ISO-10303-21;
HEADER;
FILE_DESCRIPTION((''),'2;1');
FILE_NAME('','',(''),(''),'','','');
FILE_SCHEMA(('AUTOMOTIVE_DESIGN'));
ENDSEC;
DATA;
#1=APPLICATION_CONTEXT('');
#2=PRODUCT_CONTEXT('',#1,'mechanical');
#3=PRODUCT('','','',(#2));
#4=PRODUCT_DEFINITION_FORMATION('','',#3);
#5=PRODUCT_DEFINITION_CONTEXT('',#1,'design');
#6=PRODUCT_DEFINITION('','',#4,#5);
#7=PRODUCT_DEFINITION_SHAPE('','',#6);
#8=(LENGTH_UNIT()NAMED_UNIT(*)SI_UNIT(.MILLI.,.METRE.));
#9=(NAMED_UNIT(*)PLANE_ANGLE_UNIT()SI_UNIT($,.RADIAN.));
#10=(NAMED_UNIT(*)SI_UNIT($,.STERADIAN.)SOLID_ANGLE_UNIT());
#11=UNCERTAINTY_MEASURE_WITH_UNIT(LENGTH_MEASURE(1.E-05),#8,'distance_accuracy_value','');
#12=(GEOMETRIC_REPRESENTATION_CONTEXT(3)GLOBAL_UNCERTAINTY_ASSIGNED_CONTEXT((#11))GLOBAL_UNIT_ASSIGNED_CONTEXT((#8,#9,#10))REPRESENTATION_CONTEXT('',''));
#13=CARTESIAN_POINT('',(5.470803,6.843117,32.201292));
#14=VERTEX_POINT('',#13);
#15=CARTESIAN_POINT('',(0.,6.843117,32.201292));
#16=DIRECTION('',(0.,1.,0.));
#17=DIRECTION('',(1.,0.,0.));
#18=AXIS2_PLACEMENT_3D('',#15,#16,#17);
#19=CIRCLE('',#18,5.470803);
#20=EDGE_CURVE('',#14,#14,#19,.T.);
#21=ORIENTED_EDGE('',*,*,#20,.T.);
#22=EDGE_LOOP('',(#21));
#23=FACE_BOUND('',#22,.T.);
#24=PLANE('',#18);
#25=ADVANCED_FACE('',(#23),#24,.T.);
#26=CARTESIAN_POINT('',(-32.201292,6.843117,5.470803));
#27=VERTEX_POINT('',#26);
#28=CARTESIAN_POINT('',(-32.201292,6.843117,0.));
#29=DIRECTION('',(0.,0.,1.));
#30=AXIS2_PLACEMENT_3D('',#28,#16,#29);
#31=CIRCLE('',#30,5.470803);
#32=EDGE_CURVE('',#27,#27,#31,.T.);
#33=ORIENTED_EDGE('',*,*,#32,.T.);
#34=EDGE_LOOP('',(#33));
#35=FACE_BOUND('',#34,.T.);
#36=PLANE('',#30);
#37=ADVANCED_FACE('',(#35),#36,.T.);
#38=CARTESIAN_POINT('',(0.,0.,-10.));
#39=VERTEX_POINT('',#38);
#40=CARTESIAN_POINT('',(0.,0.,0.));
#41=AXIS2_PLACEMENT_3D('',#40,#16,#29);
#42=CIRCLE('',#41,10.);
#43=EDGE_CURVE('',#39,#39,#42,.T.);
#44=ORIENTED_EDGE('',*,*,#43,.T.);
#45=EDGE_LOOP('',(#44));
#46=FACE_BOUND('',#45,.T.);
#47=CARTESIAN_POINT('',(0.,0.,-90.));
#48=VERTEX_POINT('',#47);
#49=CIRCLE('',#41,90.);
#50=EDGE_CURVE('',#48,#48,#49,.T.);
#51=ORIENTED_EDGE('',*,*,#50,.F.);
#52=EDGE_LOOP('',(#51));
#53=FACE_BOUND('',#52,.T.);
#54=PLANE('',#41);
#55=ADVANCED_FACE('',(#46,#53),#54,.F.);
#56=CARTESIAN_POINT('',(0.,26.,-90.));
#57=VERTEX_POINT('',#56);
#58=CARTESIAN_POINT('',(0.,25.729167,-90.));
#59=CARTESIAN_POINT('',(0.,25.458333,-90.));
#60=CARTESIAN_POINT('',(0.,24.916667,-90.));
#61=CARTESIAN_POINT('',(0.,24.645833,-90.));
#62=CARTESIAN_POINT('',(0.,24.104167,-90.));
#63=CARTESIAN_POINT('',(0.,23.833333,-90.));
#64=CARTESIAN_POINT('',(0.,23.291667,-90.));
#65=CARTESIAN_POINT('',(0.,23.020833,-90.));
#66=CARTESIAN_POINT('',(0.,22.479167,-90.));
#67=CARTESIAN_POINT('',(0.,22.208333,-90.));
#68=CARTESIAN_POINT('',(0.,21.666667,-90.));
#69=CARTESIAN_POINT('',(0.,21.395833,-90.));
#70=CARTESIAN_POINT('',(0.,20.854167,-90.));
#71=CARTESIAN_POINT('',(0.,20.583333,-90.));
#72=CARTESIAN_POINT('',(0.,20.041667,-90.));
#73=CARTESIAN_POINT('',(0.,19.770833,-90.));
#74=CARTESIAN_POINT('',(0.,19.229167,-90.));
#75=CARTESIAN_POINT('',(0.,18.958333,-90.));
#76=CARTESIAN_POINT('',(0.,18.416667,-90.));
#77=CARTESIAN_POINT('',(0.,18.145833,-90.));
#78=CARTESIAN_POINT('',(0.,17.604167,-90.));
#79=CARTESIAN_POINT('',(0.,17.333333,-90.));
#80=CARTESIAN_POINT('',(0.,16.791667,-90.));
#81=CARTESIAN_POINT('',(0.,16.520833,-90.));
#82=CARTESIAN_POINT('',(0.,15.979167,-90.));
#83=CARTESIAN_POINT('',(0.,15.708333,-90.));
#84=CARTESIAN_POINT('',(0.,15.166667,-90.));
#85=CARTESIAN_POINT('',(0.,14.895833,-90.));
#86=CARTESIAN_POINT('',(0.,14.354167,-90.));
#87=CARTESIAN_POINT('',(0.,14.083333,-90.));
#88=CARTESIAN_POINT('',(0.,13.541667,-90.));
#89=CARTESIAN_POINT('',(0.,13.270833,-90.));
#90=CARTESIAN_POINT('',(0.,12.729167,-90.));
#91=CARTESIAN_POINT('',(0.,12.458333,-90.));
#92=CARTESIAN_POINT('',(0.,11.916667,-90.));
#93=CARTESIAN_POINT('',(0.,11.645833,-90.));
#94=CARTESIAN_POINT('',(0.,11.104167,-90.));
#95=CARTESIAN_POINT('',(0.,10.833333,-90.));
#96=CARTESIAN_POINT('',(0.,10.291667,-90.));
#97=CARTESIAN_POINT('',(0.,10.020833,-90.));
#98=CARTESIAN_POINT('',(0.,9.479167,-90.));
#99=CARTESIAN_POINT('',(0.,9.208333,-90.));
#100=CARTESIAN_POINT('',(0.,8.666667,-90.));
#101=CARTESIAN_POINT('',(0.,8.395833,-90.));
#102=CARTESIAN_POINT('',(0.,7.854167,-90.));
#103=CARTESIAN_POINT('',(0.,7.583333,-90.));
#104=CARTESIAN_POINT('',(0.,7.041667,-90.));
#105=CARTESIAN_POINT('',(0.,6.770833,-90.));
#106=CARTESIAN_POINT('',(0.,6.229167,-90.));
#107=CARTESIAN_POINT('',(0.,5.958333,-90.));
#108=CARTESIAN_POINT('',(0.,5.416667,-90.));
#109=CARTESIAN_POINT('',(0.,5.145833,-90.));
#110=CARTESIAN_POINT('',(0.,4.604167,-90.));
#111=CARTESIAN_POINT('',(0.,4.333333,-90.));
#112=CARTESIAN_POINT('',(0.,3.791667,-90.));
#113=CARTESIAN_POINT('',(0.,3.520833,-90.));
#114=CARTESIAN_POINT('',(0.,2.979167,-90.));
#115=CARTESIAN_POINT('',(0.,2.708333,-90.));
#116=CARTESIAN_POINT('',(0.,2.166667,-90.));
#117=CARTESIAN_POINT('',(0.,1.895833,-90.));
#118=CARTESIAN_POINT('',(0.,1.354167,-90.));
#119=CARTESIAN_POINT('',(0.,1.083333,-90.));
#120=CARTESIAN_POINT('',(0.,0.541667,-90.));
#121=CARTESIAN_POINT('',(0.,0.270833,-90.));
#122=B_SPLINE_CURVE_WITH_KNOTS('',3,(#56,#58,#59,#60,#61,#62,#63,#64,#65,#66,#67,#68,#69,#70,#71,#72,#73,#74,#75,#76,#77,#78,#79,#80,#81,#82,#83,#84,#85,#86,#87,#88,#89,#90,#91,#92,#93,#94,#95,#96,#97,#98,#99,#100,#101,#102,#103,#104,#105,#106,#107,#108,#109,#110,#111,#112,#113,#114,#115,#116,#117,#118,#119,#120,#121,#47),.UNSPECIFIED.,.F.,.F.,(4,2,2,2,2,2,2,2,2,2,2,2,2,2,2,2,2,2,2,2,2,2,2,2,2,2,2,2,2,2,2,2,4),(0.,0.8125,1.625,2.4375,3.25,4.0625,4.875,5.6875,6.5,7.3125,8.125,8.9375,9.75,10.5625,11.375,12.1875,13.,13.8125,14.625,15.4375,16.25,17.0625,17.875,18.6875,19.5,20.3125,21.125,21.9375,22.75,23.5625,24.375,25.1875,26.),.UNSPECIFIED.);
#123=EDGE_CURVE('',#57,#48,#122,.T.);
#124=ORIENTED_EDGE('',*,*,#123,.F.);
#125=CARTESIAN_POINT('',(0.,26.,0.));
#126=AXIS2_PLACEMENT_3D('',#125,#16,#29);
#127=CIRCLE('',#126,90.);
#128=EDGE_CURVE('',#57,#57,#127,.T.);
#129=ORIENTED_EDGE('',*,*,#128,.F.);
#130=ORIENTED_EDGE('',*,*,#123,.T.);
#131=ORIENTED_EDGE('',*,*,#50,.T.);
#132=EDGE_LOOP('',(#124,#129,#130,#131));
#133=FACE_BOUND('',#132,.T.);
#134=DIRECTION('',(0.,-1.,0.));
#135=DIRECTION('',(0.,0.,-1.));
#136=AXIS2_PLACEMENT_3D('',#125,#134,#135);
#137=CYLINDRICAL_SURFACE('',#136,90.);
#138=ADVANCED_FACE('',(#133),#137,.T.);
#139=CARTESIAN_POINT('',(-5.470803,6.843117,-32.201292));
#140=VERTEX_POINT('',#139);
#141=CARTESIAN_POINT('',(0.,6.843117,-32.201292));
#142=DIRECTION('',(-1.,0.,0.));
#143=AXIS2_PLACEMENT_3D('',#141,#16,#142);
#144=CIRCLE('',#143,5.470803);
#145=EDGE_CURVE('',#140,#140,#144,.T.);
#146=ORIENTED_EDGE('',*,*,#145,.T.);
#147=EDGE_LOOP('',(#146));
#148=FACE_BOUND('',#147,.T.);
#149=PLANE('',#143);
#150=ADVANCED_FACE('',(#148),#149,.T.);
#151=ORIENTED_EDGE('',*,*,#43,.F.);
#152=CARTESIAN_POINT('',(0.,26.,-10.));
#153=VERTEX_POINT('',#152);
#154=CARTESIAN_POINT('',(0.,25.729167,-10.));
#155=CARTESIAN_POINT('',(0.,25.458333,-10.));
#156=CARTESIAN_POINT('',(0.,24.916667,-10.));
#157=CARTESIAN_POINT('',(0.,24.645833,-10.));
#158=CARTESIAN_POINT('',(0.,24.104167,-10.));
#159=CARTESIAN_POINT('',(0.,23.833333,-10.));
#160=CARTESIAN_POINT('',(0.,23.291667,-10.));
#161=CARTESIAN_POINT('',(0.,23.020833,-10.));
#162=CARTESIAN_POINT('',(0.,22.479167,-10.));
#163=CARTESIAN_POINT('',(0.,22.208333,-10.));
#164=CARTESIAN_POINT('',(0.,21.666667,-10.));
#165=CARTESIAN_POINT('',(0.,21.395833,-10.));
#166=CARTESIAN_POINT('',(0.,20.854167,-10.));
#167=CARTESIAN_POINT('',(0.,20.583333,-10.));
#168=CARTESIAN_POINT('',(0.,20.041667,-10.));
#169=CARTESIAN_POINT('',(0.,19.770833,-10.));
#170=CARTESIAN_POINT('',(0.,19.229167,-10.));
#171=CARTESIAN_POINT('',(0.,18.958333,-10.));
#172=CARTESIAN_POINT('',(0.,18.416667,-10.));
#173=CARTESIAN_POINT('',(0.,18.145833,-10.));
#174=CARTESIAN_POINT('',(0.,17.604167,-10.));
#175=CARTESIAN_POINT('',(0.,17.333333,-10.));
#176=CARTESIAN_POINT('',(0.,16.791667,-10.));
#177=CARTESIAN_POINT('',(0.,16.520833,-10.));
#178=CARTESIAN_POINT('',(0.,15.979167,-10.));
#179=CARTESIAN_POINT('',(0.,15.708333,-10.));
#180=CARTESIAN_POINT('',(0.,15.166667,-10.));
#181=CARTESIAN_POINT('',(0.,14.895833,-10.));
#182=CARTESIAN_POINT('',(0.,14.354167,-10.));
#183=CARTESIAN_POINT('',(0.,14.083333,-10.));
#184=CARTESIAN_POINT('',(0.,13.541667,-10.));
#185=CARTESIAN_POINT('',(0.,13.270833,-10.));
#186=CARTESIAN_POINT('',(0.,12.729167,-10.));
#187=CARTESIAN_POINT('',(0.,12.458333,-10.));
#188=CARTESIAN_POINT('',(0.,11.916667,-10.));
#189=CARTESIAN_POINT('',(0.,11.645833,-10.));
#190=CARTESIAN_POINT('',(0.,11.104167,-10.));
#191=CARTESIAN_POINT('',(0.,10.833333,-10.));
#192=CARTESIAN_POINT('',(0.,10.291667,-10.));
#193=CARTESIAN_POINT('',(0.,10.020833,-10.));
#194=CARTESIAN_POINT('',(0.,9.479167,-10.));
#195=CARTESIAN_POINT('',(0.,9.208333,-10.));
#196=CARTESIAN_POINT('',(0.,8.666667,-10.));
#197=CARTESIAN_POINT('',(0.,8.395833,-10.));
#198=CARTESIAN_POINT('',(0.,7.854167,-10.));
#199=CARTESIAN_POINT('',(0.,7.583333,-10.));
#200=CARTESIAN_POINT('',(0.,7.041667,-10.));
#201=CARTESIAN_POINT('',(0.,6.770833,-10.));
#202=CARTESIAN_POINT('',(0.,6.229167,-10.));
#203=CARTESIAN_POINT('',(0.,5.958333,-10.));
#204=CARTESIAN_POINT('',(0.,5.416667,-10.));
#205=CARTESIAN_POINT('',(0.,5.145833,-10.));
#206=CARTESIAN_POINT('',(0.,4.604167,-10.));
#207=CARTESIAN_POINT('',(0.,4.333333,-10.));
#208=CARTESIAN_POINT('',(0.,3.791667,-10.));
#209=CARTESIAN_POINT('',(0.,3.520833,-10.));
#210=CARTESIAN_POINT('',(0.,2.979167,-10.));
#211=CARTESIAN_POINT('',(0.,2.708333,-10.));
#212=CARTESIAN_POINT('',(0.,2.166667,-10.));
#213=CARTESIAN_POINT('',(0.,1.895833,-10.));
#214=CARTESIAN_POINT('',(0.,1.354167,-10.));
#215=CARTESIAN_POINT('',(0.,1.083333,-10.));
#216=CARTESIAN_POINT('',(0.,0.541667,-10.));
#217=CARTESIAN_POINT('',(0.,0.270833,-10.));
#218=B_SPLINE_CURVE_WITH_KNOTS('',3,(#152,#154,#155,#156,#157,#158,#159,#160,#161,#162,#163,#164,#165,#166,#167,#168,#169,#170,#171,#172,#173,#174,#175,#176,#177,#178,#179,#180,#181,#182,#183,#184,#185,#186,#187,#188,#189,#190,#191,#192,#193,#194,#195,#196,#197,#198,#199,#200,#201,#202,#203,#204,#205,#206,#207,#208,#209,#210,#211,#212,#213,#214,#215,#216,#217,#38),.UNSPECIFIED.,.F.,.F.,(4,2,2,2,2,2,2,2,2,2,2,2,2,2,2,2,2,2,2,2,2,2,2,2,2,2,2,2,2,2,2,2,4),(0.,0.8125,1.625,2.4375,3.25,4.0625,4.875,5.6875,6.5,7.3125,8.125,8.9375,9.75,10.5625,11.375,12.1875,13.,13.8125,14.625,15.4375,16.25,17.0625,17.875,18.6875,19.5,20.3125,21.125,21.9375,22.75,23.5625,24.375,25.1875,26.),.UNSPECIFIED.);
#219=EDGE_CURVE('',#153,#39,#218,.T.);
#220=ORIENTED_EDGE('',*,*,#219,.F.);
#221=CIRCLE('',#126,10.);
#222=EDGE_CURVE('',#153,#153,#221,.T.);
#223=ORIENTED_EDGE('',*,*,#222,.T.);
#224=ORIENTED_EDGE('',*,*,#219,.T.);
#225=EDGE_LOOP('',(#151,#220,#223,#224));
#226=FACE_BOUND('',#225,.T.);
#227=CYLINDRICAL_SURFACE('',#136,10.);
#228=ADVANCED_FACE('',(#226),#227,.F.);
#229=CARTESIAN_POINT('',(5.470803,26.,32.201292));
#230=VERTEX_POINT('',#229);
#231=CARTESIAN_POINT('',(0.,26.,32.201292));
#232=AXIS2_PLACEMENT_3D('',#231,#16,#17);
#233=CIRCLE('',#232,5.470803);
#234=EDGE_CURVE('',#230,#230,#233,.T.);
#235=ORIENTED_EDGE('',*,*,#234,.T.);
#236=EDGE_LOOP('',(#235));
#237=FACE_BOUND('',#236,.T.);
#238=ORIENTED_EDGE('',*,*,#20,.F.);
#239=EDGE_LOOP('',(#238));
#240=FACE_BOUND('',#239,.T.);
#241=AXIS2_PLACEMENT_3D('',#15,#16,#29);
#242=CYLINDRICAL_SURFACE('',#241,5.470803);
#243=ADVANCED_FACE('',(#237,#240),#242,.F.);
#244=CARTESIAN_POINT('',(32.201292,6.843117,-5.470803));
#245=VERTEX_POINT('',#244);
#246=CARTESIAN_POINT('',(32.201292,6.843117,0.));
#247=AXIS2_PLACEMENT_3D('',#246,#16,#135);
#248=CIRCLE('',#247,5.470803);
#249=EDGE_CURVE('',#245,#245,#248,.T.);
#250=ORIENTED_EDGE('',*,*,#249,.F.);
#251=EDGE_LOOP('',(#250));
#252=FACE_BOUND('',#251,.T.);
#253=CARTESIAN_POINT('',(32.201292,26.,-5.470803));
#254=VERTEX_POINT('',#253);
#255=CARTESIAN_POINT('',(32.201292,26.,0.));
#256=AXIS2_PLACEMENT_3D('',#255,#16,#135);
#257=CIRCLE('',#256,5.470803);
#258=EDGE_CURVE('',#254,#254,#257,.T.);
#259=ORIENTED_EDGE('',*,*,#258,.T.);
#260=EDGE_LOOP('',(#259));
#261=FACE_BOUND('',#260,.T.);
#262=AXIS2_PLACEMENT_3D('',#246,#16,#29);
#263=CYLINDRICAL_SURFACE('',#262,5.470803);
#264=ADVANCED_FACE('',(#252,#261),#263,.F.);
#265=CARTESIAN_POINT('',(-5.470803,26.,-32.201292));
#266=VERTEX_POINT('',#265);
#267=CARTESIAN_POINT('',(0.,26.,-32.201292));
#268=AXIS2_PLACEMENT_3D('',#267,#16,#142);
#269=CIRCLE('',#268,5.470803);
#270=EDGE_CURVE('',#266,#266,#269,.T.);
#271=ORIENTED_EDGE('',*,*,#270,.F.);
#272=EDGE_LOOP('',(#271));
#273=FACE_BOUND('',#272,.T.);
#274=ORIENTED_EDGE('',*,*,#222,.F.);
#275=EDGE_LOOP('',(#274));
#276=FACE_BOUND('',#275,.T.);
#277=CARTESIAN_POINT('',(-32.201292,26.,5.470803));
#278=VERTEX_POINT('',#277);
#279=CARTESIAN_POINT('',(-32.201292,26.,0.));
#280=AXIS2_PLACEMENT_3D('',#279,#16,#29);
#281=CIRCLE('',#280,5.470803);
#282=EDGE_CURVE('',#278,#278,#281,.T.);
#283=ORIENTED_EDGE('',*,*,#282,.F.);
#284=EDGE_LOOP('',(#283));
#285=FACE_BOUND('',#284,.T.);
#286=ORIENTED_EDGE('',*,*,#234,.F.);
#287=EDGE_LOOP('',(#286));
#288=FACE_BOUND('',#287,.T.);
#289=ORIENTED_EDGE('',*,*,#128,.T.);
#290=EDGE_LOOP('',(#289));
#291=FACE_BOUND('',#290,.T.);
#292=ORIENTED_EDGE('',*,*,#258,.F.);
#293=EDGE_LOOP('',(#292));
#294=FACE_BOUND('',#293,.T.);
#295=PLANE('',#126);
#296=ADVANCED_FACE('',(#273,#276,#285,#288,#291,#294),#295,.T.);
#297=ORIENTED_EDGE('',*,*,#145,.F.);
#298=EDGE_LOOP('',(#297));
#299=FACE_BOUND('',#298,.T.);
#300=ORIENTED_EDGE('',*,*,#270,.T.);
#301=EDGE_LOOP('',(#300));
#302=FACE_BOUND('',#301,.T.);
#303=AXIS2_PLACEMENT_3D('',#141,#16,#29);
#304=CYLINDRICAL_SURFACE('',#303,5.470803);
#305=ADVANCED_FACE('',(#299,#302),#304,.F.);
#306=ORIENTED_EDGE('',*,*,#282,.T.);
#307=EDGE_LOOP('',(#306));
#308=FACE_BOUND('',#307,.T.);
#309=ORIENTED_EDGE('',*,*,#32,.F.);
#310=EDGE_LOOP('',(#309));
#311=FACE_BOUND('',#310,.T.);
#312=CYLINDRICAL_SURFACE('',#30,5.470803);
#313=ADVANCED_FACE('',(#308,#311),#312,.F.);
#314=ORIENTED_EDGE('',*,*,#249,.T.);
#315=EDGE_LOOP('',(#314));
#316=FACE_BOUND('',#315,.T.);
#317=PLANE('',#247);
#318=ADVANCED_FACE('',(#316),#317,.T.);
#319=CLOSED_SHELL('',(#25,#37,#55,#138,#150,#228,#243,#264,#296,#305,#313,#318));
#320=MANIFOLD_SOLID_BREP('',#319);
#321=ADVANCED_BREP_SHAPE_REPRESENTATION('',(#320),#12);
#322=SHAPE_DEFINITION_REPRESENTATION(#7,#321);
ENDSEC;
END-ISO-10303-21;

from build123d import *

# Parameters (mm, degrees)
SKETCH1_R           = 90
BOSS_EXTRUDE1_DEPTH = 26
SKETCH2_R           = 10
CUT_EXTRUDE1_DEPTH  = 130.907659512
SKETCH3_R           = 5.470803328
CUT_EXTRUDE2_DEPTH  = 19.156883318
CIRPATTERN1_COUNT   = 4


with BuildPart() as part:
    # Sketch1 → Boss-Extrude1 (new body)
    with BuildSketch(Plane(origin=(0, 0, 0), x_dir=(1, 0, 0), z_dir=(0, 1, 0))):
        Circle(SKETCH1_R)
    extrude(amount=BOSS_EXTRUDE1_DEPTH)

    # Sketch2 → Cut-Extrude1 (cut, through all)
    with BuildSketch(Plane(origin=(0, 0, 0), x_dir=(1, 0, 0), z_dir=(0, 1, 0))):
        Circle(SKETCH2_R)
    extrude(amount=CUT_EXTRUDE1_DEPTH, mode=Mode.SUBTRACT)

    # Sketch3 → Cut-Extrude2 (cut)
    with BuildSketch(Plane(origin=(0, 26, 0), x_dir=(1, 0, 0), z_dir=(0, 1, 0))):
        with Locations((-32.201291548, 0)):
            Circle(SKETCH3_R)
    cut_extrude2 = extrude(amount=-CUT_EXTRUDE2_DEPTH, mode=Mode.SUBTRACT)

    # CirPattern1: Cut-Extrude2 ×4 about axis
    cirpattern1_axis = Axis((0, 0, 0), (0, 1, 0))
    for i in range(1, CIRPATTERN1_COUNT):
        add(cut_extrude2.rotate(cirpattern1_axis, i * 360 / CIRPATTERN1_COUNT), mode=Mode.SUBTRACT)


solid = part.part
